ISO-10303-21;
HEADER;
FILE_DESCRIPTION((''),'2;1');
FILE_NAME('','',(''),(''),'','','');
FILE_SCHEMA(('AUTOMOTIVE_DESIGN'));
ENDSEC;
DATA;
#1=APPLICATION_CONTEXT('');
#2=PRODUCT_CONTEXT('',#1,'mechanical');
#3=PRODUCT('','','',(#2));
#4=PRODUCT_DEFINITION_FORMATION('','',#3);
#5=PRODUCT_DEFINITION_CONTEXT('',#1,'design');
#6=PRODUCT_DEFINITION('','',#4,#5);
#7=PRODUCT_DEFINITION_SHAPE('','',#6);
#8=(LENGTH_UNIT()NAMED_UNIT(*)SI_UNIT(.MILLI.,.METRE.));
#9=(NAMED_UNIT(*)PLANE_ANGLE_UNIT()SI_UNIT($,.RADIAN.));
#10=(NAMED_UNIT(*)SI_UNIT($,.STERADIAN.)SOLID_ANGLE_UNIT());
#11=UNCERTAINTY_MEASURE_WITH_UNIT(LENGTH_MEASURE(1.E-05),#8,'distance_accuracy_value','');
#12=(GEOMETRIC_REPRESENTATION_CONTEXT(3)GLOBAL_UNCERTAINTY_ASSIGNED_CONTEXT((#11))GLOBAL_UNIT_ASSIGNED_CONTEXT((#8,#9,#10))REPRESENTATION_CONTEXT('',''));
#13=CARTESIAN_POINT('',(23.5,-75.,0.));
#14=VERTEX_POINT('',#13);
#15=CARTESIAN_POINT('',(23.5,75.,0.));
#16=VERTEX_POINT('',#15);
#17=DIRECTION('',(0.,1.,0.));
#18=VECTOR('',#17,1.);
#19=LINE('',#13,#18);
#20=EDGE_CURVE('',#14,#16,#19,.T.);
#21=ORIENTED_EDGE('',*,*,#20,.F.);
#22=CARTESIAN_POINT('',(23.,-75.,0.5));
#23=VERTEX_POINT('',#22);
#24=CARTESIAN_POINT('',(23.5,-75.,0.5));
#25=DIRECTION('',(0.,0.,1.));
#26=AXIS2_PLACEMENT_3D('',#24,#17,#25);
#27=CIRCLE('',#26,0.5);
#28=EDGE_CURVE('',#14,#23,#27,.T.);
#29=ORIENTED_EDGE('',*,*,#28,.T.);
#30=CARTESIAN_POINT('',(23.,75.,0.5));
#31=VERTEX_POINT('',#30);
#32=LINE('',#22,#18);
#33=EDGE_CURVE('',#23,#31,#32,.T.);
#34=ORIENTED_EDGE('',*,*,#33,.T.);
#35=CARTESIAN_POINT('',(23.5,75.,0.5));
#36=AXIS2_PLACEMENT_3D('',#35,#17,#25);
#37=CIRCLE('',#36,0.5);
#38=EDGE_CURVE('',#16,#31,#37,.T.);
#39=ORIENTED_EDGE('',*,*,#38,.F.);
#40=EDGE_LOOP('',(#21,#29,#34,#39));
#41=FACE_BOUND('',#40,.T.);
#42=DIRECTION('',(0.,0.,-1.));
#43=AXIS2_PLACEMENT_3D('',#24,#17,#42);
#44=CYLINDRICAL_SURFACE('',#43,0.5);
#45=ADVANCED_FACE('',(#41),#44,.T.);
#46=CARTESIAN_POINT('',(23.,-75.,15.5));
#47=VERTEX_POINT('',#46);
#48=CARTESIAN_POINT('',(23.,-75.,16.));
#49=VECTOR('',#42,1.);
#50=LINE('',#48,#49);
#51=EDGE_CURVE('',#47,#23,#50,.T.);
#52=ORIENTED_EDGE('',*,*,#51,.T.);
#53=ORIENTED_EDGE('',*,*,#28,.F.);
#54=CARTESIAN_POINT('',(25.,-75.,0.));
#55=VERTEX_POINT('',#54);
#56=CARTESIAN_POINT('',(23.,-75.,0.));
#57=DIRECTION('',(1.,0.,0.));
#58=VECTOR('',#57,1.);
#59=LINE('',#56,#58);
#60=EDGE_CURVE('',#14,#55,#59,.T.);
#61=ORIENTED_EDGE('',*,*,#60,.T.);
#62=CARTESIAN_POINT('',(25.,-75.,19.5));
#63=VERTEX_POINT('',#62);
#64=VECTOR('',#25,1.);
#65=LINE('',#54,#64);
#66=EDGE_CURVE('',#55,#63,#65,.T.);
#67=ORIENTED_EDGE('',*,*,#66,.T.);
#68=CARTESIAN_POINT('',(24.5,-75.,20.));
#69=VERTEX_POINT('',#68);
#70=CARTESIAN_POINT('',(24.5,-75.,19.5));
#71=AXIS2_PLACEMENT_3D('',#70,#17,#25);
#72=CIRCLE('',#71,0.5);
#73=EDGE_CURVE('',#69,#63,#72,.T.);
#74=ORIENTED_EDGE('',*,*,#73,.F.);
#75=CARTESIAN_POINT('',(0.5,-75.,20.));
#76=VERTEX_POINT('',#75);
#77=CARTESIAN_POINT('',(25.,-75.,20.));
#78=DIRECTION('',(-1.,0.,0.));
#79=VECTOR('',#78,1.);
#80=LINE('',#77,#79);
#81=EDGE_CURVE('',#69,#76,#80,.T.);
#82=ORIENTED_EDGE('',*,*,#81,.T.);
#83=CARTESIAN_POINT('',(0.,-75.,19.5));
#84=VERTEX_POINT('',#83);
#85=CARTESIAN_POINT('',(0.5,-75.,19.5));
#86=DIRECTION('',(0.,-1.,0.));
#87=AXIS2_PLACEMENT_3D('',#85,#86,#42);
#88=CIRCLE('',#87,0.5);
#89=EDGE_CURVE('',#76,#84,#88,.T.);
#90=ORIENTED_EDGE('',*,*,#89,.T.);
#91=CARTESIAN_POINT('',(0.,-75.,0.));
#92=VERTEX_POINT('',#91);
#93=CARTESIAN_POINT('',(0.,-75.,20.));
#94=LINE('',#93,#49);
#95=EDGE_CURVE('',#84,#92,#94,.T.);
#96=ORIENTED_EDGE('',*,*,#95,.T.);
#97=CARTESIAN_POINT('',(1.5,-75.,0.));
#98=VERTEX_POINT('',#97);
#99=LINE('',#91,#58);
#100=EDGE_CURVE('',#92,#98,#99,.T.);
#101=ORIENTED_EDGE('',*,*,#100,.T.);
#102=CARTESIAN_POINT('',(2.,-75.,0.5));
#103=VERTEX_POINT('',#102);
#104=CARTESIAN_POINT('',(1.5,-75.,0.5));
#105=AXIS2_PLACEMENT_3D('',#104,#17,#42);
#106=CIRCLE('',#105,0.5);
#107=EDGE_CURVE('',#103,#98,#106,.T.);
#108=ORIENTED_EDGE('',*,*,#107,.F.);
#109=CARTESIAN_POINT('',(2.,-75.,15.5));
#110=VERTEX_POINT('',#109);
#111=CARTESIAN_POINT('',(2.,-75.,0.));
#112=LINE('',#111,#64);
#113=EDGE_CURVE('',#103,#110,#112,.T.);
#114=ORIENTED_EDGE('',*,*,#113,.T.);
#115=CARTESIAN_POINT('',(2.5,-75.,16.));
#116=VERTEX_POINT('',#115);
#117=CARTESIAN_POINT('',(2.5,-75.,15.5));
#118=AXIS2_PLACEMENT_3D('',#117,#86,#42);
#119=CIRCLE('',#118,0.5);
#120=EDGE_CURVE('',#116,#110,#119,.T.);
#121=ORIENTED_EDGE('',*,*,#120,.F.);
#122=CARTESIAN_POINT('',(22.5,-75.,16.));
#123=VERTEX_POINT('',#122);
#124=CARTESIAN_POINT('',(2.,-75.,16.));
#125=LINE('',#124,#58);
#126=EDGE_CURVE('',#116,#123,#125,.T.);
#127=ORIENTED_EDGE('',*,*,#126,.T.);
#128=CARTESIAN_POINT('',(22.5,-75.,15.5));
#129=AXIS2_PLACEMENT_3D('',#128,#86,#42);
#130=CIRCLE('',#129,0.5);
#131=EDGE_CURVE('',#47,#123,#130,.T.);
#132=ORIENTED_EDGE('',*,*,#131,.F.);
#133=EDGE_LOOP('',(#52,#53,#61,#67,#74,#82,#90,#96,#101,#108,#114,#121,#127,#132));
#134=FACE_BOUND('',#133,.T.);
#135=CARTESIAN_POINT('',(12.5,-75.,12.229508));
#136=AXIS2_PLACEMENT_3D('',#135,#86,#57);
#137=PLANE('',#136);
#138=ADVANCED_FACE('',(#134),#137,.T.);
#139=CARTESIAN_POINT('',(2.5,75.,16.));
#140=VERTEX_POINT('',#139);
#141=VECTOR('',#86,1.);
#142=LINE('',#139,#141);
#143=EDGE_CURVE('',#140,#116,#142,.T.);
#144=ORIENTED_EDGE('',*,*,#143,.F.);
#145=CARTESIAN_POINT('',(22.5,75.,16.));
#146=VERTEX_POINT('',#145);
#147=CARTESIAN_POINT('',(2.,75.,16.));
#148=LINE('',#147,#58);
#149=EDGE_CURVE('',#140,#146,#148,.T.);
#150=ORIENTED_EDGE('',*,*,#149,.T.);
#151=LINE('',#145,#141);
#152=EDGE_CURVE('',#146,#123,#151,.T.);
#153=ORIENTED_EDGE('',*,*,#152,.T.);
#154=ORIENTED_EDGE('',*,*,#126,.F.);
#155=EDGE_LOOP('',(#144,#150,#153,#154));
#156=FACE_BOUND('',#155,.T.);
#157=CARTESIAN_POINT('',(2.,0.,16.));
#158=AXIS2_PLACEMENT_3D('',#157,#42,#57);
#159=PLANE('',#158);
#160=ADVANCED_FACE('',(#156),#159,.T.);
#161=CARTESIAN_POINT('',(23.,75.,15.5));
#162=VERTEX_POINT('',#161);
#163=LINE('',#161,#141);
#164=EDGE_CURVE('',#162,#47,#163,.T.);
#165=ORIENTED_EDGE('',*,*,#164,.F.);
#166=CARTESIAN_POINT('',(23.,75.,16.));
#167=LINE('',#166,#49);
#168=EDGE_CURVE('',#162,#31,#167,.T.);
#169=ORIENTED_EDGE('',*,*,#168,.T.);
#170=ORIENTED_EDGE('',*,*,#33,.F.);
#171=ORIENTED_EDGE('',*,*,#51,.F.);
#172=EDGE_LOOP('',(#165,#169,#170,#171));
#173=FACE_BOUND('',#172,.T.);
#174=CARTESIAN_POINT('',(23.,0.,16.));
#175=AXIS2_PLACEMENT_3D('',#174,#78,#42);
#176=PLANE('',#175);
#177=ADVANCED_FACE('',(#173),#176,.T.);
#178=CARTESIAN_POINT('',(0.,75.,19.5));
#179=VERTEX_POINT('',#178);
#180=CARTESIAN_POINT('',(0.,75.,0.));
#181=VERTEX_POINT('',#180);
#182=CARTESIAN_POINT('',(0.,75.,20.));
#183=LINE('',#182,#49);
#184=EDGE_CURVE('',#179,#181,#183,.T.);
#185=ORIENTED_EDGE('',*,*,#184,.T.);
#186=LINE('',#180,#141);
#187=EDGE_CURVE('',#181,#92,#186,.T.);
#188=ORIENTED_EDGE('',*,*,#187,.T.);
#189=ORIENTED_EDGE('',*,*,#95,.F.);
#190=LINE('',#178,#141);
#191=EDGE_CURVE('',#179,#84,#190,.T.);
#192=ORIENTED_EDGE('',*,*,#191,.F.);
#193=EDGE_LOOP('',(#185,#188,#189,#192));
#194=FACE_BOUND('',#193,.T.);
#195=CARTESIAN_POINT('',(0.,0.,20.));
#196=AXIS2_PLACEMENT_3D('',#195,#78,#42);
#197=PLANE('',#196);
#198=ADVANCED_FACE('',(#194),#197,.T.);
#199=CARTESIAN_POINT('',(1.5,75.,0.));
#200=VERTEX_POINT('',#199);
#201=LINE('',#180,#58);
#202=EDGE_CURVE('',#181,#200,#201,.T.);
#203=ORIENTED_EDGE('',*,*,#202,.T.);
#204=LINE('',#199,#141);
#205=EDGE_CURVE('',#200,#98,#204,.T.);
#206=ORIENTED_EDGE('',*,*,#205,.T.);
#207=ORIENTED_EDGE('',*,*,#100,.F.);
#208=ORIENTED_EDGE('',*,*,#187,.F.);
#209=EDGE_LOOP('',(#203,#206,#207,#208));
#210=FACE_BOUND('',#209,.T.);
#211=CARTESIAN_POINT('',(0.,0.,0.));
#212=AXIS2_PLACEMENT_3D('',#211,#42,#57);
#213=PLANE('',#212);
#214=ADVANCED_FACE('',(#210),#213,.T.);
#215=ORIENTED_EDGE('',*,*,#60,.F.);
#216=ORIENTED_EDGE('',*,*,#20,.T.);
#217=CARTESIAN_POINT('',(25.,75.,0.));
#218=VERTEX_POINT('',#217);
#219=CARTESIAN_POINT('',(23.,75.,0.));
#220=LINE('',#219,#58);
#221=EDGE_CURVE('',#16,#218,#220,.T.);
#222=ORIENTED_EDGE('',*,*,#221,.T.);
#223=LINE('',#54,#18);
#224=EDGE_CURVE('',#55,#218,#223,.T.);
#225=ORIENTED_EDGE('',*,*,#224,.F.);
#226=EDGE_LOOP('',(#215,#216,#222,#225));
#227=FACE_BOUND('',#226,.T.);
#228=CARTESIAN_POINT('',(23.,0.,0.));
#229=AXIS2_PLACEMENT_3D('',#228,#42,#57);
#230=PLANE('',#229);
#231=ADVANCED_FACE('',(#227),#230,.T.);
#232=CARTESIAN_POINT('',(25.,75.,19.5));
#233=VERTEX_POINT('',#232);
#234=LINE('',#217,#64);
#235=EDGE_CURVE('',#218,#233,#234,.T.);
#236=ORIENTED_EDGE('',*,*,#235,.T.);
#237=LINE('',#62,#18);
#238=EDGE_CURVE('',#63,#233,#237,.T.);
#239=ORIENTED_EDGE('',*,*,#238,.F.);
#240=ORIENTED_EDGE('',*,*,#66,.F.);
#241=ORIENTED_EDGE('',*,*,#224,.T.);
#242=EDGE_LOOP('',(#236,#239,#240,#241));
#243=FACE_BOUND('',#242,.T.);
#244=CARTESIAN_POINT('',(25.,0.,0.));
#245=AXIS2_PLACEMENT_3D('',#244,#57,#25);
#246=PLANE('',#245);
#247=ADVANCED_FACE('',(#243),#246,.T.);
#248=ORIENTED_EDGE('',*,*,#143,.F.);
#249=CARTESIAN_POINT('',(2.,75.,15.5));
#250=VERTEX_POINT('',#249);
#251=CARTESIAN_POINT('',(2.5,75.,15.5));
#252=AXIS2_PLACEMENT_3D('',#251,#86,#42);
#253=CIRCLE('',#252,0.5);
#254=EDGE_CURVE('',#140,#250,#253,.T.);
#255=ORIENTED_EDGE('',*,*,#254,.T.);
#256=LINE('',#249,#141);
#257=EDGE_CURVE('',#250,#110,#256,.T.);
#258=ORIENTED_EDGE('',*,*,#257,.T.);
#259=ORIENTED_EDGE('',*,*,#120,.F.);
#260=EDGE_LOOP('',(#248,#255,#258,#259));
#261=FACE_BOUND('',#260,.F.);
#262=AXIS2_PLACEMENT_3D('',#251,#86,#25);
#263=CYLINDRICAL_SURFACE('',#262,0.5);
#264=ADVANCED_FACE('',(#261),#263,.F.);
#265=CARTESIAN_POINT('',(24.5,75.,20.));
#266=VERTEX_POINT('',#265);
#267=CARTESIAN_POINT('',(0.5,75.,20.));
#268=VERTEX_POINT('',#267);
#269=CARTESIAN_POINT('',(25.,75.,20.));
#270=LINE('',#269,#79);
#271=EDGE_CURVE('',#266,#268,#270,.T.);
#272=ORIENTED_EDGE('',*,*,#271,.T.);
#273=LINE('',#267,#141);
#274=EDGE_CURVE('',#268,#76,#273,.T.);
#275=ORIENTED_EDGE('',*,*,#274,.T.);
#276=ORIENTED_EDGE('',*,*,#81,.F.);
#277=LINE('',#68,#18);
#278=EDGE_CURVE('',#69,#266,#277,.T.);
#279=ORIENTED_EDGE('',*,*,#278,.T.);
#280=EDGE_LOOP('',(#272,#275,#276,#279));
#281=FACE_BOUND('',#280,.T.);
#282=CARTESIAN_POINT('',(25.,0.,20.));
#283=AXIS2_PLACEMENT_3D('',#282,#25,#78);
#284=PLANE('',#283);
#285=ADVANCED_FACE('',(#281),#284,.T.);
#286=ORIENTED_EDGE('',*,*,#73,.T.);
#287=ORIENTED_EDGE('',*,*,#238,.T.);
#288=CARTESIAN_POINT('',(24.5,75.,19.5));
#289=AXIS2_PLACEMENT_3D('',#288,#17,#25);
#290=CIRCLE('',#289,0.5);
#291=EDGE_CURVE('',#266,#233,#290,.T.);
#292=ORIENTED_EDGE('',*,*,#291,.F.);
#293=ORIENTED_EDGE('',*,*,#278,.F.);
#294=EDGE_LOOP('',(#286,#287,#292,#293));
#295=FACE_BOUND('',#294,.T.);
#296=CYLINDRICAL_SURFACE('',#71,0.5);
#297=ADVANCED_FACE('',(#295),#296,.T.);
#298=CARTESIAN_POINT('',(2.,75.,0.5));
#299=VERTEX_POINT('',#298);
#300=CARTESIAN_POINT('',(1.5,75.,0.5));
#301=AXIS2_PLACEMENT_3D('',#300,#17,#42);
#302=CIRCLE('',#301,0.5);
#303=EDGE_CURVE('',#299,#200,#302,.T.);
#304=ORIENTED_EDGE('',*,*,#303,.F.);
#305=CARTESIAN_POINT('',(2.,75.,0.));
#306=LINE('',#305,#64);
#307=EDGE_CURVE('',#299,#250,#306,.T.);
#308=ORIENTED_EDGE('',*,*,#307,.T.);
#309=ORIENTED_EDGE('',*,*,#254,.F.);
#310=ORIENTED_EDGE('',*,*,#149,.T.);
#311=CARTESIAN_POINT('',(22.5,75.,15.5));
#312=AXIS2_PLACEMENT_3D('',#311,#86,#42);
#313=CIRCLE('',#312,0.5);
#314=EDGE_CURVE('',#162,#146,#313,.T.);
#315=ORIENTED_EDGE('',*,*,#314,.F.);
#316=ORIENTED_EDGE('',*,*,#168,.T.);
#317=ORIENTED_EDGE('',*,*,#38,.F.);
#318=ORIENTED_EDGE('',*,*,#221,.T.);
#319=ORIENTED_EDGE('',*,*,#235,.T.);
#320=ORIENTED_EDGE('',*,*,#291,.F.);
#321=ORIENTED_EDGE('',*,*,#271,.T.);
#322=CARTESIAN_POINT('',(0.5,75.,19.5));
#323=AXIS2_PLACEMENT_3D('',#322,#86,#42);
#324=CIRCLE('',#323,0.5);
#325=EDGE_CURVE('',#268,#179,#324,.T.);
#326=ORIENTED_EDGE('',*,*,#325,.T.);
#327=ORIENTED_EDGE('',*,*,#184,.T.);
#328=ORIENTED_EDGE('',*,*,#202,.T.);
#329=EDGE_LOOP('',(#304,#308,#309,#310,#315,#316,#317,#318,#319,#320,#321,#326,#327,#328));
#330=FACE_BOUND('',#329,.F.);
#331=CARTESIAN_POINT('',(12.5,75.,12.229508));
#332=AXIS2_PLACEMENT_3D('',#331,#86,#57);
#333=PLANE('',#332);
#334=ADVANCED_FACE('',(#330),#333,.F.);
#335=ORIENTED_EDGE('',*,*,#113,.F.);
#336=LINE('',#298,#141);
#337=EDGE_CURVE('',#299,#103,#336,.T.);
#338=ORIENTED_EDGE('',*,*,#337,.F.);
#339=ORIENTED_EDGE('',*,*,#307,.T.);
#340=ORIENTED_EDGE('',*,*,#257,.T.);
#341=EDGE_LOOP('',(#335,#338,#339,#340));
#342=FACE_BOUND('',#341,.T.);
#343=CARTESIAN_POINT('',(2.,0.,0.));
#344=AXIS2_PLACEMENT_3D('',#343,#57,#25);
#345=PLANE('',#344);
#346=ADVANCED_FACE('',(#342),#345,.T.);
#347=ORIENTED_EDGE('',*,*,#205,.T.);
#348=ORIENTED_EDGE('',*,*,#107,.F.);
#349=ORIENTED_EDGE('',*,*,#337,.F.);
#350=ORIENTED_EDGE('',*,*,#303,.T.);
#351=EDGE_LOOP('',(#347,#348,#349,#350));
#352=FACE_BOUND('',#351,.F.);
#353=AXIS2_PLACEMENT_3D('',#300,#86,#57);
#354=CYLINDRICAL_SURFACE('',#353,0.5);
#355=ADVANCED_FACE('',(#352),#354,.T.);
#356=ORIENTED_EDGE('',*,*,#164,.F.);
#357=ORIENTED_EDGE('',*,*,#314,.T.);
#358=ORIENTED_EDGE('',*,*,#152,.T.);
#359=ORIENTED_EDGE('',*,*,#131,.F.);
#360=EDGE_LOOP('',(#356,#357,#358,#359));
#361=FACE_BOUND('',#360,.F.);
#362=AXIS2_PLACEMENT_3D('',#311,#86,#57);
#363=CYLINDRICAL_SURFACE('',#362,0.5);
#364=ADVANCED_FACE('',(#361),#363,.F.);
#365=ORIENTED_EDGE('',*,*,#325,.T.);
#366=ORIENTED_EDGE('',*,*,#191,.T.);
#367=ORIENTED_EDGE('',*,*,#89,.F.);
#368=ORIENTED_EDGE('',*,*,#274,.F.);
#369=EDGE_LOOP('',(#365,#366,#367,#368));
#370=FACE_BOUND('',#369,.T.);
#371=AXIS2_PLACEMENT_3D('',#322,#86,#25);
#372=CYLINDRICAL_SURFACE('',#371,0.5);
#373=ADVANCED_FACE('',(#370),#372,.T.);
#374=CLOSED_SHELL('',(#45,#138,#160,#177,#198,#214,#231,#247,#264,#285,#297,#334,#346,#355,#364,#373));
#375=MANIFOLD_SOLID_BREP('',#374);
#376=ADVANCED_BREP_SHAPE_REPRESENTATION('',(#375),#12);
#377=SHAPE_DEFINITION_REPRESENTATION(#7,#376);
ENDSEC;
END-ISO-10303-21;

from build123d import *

# Parameters (mm, degrees)
F1_DEPTH = 75
F3_R     = 0.5


with BuildPart() as f1:
    # F0 (on Front) → F1 (new body, symmetric)
    with BuildSketch(Plane.XZ):
        Polygon((25, 20), (0, 20), (0, 0), (2, 0), (2, 16), (23, 16), (23, 0), (25, 0), align=None)
    extrude(amount=F1_DEPTH, both=True)

    # F3
    f3_edges = [f1.edges().sort_by_distance(p)[0] for p in [
        (0, 0, 20),
        (25, 0, 20),
        (23, 0, 0),
        (23, 0, 16),
        (2, 0, 16),
        (2, 0, 0),
    ]]
    fillet(f3_edges, radius=F3_R)


solid = f1.part
